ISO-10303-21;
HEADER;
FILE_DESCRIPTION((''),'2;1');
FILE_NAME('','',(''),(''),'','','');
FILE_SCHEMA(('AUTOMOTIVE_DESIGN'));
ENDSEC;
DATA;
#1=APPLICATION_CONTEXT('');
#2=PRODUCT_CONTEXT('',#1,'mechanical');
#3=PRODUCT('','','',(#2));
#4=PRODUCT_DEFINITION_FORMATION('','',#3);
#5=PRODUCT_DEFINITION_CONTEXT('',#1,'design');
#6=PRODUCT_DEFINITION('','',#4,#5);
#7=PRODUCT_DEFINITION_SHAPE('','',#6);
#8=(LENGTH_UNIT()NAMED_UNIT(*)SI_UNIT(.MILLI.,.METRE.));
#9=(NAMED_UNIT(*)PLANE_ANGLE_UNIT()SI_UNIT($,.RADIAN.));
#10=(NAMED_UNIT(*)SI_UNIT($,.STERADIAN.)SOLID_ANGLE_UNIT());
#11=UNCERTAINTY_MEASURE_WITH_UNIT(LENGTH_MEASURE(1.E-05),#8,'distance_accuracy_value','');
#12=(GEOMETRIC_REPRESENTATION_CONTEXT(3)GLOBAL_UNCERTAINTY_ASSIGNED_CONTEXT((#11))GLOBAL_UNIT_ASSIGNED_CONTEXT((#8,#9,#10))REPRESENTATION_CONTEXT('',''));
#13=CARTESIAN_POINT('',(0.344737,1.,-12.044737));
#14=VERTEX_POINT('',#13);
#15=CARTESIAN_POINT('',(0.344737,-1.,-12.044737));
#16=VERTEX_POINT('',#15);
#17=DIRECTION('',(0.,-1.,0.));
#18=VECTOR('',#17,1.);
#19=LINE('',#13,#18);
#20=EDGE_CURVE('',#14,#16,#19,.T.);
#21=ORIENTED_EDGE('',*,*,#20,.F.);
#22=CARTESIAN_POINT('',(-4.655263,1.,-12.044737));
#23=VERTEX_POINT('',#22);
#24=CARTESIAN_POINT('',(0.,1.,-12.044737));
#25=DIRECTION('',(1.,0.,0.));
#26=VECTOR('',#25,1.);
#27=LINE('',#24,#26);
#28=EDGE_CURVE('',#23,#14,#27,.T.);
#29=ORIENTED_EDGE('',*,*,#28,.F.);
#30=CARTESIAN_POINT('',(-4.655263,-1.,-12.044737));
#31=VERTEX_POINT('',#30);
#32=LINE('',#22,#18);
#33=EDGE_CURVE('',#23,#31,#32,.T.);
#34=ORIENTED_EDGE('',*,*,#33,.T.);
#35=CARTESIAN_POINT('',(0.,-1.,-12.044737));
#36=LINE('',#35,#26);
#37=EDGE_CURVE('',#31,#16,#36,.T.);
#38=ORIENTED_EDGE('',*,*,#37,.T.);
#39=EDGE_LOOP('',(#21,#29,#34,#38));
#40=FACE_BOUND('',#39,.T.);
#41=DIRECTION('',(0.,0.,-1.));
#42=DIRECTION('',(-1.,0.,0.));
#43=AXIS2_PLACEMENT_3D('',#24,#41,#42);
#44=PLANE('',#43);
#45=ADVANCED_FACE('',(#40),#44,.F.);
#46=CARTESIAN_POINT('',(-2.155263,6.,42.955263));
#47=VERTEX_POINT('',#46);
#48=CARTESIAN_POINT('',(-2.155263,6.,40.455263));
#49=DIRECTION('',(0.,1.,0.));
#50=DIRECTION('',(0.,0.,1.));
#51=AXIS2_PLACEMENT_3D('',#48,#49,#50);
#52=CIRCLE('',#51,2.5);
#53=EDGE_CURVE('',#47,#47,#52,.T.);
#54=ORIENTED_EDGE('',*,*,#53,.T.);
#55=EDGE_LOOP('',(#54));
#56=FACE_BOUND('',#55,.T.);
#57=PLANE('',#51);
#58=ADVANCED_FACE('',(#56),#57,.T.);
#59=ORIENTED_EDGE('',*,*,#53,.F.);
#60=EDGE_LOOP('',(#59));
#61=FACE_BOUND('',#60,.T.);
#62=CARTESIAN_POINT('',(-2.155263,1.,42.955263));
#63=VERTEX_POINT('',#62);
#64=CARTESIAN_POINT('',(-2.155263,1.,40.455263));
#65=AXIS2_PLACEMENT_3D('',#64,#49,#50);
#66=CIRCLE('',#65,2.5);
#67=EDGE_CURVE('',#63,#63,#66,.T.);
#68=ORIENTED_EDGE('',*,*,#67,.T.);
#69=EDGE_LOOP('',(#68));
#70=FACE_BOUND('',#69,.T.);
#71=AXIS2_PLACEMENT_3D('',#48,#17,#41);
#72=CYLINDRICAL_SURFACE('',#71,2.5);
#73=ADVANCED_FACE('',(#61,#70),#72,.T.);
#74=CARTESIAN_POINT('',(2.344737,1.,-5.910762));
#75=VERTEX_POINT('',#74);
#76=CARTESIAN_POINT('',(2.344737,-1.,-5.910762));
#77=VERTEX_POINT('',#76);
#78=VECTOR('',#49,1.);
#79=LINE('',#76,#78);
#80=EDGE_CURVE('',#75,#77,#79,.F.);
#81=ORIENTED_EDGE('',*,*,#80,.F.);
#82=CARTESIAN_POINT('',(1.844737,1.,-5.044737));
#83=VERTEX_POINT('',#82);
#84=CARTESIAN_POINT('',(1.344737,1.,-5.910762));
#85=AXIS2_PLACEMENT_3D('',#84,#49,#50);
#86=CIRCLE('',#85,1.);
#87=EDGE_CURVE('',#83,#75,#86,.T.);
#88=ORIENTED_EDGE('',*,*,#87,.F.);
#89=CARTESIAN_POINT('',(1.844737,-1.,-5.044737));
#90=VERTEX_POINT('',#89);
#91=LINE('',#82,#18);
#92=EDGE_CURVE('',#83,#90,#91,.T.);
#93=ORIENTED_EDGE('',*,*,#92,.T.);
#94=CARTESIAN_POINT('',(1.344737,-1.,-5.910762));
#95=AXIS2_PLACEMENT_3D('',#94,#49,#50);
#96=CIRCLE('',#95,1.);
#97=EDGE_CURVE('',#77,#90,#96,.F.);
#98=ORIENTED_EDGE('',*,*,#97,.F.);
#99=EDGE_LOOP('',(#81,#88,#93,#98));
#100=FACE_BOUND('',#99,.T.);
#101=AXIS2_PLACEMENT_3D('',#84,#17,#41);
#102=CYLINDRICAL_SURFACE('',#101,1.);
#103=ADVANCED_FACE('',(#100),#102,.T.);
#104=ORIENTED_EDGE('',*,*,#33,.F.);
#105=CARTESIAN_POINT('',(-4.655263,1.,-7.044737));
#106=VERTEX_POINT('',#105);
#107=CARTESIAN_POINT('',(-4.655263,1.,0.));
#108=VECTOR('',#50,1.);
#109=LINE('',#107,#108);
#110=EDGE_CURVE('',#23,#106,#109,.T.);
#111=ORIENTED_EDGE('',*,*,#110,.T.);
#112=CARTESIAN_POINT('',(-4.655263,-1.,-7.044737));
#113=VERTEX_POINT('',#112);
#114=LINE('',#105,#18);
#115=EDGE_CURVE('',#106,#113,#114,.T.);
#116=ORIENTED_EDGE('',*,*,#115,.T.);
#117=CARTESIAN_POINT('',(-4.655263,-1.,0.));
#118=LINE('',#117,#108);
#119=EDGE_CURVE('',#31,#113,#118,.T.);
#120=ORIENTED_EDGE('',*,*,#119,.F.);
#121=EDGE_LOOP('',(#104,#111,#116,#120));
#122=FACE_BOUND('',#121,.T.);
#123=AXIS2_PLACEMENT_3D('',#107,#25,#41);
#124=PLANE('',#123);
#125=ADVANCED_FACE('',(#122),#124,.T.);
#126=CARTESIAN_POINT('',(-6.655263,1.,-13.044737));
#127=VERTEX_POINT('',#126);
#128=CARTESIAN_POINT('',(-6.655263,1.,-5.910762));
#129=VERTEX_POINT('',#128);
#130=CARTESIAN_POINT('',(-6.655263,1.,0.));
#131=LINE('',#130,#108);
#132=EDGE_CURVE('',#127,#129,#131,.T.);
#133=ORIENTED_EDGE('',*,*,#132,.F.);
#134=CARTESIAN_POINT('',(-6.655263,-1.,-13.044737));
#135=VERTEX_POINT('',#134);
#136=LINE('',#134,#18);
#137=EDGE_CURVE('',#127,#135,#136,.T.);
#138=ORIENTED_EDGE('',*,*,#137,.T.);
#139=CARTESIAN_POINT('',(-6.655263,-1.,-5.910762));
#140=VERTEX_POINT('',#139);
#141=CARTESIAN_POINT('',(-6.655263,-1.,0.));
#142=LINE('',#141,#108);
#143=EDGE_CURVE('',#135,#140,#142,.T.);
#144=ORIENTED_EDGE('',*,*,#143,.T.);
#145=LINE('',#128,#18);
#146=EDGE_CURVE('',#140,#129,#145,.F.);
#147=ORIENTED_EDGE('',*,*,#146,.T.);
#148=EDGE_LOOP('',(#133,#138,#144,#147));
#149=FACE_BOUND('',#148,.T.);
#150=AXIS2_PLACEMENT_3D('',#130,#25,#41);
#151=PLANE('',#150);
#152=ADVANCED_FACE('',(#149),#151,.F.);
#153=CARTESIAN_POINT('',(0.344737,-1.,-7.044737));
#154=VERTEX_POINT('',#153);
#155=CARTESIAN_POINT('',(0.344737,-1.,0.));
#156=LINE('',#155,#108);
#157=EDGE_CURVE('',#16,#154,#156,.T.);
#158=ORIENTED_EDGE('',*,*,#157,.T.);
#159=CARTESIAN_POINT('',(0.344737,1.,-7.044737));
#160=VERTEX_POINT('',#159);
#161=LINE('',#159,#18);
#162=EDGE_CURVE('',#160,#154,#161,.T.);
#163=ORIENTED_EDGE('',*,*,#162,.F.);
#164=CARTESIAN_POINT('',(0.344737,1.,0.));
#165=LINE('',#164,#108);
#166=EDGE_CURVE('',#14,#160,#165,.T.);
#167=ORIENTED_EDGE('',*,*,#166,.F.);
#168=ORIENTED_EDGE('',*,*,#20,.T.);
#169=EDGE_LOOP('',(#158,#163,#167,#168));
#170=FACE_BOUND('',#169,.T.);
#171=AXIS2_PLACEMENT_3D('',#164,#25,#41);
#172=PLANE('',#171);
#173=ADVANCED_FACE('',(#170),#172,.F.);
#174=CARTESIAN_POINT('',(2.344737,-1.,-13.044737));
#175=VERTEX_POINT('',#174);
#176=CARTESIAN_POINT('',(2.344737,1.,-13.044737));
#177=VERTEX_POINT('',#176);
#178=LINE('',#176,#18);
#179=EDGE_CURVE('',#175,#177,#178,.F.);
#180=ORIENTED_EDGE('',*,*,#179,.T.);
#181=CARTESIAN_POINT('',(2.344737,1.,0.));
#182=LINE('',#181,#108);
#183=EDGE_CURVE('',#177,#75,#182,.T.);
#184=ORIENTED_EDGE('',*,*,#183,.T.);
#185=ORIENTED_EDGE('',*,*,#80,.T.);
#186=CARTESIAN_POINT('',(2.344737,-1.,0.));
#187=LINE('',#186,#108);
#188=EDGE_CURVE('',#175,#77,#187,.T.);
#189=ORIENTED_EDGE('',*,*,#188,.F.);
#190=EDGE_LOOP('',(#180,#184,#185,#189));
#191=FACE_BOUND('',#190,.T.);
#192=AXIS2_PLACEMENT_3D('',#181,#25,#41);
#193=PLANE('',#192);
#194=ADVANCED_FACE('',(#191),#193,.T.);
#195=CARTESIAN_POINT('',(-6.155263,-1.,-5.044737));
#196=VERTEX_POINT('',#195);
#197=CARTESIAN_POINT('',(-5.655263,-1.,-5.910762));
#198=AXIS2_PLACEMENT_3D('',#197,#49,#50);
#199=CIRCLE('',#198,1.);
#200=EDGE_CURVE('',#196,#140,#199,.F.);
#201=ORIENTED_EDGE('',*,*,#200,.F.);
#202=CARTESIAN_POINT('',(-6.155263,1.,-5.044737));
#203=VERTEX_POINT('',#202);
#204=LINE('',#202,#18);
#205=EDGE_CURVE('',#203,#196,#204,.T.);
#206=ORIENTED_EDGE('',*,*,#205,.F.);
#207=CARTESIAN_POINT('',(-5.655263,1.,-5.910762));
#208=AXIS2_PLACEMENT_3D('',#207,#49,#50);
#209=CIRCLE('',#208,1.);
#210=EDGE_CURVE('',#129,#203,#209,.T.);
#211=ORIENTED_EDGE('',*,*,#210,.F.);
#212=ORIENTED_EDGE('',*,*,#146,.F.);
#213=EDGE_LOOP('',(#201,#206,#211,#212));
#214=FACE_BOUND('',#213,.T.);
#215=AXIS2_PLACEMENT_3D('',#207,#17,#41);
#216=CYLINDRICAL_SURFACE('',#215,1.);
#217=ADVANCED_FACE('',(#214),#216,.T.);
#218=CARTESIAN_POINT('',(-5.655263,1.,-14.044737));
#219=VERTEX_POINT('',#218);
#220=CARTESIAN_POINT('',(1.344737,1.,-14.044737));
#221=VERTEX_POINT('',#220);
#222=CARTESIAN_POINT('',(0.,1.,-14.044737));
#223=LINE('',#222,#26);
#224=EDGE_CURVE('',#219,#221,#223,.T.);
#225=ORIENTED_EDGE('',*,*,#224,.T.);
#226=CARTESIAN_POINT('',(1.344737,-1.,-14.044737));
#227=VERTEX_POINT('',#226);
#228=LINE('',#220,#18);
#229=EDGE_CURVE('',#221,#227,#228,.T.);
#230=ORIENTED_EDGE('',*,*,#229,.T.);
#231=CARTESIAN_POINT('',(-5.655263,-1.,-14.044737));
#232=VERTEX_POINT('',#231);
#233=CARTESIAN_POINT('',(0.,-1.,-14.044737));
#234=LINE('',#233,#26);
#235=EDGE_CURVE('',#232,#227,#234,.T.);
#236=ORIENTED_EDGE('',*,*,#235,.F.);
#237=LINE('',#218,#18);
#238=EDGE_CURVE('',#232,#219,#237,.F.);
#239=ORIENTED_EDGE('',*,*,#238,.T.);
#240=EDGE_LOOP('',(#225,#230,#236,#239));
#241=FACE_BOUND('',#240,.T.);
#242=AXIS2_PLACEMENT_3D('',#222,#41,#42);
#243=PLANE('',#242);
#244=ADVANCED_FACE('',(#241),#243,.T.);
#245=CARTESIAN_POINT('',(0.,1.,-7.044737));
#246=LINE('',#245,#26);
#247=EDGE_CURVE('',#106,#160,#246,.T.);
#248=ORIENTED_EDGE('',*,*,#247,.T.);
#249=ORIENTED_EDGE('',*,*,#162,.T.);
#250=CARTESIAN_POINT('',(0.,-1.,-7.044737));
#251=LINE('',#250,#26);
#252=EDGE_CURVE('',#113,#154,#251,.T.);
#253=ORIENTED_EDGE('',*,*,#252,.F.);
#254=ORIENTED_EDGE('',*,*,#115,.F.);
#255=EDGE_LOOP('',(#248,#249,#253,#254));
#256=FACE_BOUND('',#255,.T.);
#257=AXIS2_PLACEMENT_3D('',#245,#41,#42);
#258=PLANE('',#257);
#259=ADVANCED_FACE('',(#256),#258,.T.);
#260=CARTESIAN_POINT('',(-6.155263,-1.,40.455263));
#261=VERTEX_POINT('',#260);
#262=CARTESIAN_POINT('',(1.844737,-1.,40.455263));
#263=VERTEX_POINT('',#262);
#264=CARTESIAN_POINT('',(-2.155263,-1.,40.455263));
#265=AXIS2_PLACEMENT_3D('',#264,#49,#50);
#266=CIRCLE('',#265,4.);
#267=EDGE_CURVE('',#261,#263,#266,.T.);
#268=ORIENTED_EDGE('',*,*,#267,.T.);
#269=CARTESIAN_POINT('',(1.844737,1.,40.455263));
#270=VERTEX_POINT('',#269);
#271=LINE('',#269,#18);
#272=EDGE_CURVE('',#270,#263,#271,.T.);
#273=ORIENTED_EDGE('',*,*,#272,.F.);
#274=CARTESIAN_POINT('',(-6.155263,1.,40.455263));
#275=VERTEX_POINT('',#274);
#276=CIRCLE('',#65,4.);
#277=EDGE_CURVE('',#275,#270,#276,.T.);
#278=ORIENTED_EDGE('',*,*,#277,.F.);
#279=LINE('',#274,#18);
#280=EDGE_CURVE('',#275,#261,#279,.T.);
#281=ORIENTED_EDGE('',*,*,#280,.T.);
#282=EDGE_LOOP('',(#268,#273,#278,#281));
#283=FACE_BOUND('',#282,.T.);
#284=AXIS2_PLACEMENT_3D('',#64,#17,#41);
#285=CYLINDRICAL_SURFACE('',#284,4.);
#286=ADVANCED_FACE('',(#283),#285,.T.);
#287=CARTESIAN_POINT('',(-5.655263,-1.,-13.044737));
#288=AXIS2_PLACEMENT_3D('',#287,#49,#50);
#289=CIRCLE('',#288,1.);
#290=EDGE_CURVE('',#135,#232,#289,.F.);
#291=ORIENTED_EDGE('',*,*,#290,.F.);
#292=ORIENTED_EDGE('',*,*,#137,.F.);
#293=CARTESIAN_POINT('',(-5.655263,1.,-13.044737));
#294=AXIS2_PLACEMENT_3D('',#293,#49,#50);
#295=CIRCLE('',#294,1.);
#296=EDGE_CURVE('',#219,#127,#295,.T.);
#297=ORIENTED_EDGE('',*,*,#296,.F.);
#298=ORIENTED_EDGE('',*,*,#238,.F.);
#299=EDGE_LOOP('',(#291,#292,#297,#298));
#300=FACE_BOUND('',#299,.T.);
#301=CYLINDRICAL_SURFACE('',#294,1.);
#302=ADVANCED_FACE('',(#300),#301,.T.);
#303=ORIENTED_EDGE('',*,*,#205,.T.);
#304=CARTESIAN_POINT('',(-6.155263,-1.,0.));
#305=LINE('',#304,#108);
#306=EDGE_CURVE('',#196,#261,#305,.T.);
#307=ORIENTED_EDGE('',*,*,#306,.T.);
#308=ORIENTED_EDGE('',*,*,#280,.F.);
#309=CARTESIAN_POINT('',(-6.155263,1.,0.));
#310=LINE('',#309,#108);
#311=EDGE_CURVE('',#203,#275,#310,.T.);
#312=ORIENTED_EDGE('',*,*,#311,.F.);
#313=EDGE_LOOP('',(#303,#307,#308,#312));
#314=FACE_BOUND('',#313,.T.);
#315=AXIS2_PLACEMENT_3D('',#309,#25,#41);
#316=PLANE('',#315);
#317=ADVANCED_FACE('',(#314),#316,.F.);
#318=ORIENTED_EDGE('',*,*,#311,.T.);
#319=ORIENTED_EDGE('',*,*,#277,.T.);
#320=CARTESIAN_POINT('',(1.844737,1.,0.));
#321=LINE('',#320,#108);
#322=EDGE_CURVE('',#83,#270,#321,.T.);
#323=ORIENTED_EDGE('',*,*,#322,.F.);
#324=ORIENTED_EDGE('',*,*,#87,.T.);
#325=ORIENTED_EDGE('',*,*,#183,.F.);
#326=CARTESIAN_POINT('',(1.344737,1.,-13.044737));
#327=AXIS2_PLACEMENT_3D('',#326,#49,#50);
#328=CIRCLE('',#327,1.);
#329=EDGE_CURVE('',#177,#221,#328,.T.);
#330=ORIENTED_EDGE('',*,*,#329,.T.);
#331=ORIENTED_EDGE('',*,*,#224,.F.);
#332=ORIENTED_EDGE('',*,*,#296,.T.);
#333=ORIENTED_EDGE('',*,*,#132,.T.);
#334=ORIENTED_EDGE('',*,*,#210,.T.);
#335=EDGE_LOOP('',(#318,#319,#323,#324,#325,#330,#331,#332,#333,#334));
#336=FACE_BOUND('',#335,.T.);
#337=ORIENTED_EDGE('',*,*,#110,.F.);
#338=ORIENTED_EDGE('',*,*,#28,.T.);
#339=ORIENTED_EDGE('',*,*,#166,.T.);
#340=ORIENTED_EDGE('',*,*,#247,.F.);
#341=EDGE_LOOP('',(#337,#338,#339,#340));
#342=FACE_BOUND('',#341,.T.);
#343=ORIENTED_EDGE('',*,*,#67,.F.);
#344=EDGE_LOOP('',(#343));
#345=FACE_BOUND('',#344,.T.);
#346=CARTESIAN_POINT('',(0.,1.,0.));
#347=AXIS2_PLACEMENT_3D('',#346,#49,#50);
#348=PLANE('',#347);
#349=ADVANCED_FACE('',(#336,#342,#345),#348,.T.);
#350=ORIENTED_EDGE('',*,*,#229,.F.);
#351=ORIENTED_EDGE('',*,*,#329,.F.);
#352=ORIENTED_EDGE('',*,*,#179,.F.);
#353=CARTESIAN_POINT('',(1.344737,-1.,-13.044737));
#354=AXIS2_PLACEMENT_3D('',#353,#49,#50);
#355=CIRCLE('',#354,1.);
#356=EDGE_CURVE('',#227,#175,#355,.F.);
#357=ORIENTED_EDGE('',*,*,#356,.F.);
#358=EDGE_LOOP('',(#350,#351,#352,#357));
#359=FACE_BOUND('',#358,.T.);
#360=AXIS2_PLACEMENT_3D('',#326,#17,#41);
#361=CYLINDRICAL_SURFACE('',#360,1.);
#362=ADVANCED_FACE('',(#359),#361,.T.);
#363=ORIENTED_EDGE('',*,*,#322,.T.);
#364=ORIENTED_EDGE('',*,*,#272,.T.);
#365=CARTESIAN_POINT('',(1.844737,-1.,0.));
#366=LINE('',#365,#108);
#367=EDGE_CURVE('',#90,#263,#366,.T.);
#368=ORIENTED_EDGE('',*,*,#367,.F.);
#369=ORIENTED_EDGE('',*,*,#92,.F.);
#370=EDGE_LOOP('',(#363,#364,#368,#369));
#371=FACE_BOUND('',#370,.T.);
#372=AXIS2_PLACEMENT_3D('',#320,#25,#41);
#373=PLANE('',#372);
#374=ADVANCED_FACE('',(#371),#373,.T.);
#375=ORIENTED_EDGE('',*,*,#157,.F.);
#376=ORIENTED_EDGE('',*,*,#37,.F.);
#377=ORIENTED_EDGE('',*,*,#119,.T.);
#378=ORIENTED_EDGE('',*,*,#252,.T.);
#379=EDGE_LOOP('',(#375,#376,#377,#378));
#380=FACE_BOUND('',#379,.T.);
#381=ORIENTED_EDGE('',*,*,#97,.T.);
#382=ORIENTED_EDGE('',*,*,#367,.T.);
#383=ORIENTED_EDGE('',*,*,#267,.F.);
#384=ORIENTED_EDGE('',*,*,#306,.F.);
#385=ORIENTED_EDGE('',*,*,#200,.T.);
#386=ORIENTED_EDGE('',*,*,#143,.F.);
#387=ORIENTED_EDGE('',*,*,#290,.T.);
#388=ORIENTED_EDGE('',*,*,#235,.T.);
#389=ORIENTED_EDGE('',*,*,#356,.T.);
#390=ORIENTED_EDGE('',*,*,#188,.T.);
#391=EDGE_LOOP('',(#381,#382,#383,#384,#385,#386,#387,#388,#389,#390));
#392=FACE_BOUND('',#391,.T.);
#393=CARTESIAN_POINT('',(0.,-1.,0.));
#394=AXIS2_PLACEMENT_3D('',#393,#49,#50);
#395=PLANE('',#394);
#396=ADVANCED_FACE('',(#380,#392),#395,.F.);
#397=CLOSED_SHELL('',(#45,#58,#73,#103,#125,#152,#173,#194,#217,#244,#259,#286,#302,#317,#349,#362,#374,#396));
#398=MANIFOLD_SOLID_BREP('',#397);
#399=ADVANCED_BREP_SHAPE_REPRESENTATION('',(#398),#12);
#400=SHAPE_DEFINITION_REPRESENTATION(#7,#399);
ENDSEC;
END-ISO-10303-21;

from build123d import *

# Parameters (mm, degrees)
SKETCH1_W           = 5
SKETCH1_H           = 5
BOSS_EXTRUDE1_DEPTH = 1
FILLET1_R           = 1
SKETCH2_R           = 2.5
BOSS_EXTRUDE2_DEPTH = 5


with BuildPart() as part:
    # Sketch1 → Boss-Extrude1 (new, symmetric)
    # profile 1 of 2: a face of its own
    with BuildSketch(Plane(origin=(0, 0, 0), x_dir=(1, 0, 0), z_dir=(0, 1, 0))):
        with BuildLine():
            Line((1.844736842, 5.044736842), (-6.155263158, 5.044736842))
            Line((-6.155263158, 5.044736842), (-6.155263158, -40.455263158))
            ThreePointArc((-6.155263158, -40.455263158), (-2.155263158, -44.455263158), (1.844736842, -40.455263158))
            Line((1.844736842, -40.455263158), (1.844736842, 5.044736842))
        make_face()
    # profile 2 of 2: a face of its own
    with BuildSketch(Plane(origin=(0, 0, 0), x_dir=(1, 0, 0), z_dir=(0, 1, 0))):
        Polygon((-6.655263158, 5.044736842), (-6.155263158, 5.044736842), (1.844736842, 5.044736842), (2.344736842, 5.044736842), (2.344736842, 14.044736842), (-6.655263158, 14.044736842), align=None)
        with Locations((-2.155263158, 9.544736842)):
            Rectangle(SKETCH1_W, SKETCH1_H, mode=Mode.SUBTRACT)
    extrude(amount=BOSS_EXTRUDE1_DEPTH, both=True)

    # Fillet1
    # the kernel refuses this fillet: 1 mm, written as the material it takes off along each edge
    with BuildSketch(Plane(origin=(2.344736842, 3.165063509, -5.044736842), x_dir=(0, 0, -1), z_dir=(0, -1, 0)), Plane(origin=(-6.655263158, -3.165063509, -5.044736842), x_dir=(0, 0, -1), z_dir=(0, 1, 0))) as fillet1_piece_1:
        with BuildLine():
            CenterArc((0.866025404, -1), FILLET1_R, 90, 60)
            Line((0, -0.5), (-0.017320508, -0.49))
            ThreePointArc((-0.017320508, -0.49), (-0.02, -0.25), (-0.02, 0))
            Line((-0.02, 0), (0, 0.02))
            Line((0, 0.02), (0.866025404, 0.02))
            Line((0.866025404, 0.02), (0.866025404, 0))
        make_face()
    extrude(amount=6.330127019, mode=Mode.SUBTRACT)
    with BuildSketch(Plane(origin=(2.344736842, 3.5, -14.044736842), x_dir=(-1, 0, 0), z_dir=(0, -1, 0)), Plane(origin=(-6.655263158, -3.5, -14.044736842), x_dir=(1, 0, 0), z_dir=(0, 1, 0))) as fillet1_piece_2:
        with BuildLine():
            CenterArc((FILLET1_R, -FILLET1_R), FILLET1_R, 90, 90)
            Line((0, -FILLET1_R), (-FILLET1_R * 0.02, -FILLET1_R))
            Line((-FILLET1_R * 0.02, -FILLET1_R), (-FILLET1_R * 0.02, FILLET1_R * 0.02))
            Line((-FILLET1_R * 0.02, FILLET1_R * 0.02), (FILLET1_R, FILLET1_R * 0.02))
            Line((FILLET1_R, FILLET1_R * 0.02), (FILLET1_R, 0))
        make_face()
    extrude(amount=7, mode=Mode.SUBTRACT)

    # Sketch2 → Boss-Extrude2 (add)
    with BuildSketch(Plane(origin=(0, 1, 0), x_dir=(1, 0, 0), z_dir=(0, 1, 0))):
        with Locations(Location((-2.155263158, -40.455263158, 0), (0, 0, 270))):
            Circle(SKETCH2_R)
    extrude(amount=BOSS_EXTRUDE2_DEPTH)


solid = part.part
